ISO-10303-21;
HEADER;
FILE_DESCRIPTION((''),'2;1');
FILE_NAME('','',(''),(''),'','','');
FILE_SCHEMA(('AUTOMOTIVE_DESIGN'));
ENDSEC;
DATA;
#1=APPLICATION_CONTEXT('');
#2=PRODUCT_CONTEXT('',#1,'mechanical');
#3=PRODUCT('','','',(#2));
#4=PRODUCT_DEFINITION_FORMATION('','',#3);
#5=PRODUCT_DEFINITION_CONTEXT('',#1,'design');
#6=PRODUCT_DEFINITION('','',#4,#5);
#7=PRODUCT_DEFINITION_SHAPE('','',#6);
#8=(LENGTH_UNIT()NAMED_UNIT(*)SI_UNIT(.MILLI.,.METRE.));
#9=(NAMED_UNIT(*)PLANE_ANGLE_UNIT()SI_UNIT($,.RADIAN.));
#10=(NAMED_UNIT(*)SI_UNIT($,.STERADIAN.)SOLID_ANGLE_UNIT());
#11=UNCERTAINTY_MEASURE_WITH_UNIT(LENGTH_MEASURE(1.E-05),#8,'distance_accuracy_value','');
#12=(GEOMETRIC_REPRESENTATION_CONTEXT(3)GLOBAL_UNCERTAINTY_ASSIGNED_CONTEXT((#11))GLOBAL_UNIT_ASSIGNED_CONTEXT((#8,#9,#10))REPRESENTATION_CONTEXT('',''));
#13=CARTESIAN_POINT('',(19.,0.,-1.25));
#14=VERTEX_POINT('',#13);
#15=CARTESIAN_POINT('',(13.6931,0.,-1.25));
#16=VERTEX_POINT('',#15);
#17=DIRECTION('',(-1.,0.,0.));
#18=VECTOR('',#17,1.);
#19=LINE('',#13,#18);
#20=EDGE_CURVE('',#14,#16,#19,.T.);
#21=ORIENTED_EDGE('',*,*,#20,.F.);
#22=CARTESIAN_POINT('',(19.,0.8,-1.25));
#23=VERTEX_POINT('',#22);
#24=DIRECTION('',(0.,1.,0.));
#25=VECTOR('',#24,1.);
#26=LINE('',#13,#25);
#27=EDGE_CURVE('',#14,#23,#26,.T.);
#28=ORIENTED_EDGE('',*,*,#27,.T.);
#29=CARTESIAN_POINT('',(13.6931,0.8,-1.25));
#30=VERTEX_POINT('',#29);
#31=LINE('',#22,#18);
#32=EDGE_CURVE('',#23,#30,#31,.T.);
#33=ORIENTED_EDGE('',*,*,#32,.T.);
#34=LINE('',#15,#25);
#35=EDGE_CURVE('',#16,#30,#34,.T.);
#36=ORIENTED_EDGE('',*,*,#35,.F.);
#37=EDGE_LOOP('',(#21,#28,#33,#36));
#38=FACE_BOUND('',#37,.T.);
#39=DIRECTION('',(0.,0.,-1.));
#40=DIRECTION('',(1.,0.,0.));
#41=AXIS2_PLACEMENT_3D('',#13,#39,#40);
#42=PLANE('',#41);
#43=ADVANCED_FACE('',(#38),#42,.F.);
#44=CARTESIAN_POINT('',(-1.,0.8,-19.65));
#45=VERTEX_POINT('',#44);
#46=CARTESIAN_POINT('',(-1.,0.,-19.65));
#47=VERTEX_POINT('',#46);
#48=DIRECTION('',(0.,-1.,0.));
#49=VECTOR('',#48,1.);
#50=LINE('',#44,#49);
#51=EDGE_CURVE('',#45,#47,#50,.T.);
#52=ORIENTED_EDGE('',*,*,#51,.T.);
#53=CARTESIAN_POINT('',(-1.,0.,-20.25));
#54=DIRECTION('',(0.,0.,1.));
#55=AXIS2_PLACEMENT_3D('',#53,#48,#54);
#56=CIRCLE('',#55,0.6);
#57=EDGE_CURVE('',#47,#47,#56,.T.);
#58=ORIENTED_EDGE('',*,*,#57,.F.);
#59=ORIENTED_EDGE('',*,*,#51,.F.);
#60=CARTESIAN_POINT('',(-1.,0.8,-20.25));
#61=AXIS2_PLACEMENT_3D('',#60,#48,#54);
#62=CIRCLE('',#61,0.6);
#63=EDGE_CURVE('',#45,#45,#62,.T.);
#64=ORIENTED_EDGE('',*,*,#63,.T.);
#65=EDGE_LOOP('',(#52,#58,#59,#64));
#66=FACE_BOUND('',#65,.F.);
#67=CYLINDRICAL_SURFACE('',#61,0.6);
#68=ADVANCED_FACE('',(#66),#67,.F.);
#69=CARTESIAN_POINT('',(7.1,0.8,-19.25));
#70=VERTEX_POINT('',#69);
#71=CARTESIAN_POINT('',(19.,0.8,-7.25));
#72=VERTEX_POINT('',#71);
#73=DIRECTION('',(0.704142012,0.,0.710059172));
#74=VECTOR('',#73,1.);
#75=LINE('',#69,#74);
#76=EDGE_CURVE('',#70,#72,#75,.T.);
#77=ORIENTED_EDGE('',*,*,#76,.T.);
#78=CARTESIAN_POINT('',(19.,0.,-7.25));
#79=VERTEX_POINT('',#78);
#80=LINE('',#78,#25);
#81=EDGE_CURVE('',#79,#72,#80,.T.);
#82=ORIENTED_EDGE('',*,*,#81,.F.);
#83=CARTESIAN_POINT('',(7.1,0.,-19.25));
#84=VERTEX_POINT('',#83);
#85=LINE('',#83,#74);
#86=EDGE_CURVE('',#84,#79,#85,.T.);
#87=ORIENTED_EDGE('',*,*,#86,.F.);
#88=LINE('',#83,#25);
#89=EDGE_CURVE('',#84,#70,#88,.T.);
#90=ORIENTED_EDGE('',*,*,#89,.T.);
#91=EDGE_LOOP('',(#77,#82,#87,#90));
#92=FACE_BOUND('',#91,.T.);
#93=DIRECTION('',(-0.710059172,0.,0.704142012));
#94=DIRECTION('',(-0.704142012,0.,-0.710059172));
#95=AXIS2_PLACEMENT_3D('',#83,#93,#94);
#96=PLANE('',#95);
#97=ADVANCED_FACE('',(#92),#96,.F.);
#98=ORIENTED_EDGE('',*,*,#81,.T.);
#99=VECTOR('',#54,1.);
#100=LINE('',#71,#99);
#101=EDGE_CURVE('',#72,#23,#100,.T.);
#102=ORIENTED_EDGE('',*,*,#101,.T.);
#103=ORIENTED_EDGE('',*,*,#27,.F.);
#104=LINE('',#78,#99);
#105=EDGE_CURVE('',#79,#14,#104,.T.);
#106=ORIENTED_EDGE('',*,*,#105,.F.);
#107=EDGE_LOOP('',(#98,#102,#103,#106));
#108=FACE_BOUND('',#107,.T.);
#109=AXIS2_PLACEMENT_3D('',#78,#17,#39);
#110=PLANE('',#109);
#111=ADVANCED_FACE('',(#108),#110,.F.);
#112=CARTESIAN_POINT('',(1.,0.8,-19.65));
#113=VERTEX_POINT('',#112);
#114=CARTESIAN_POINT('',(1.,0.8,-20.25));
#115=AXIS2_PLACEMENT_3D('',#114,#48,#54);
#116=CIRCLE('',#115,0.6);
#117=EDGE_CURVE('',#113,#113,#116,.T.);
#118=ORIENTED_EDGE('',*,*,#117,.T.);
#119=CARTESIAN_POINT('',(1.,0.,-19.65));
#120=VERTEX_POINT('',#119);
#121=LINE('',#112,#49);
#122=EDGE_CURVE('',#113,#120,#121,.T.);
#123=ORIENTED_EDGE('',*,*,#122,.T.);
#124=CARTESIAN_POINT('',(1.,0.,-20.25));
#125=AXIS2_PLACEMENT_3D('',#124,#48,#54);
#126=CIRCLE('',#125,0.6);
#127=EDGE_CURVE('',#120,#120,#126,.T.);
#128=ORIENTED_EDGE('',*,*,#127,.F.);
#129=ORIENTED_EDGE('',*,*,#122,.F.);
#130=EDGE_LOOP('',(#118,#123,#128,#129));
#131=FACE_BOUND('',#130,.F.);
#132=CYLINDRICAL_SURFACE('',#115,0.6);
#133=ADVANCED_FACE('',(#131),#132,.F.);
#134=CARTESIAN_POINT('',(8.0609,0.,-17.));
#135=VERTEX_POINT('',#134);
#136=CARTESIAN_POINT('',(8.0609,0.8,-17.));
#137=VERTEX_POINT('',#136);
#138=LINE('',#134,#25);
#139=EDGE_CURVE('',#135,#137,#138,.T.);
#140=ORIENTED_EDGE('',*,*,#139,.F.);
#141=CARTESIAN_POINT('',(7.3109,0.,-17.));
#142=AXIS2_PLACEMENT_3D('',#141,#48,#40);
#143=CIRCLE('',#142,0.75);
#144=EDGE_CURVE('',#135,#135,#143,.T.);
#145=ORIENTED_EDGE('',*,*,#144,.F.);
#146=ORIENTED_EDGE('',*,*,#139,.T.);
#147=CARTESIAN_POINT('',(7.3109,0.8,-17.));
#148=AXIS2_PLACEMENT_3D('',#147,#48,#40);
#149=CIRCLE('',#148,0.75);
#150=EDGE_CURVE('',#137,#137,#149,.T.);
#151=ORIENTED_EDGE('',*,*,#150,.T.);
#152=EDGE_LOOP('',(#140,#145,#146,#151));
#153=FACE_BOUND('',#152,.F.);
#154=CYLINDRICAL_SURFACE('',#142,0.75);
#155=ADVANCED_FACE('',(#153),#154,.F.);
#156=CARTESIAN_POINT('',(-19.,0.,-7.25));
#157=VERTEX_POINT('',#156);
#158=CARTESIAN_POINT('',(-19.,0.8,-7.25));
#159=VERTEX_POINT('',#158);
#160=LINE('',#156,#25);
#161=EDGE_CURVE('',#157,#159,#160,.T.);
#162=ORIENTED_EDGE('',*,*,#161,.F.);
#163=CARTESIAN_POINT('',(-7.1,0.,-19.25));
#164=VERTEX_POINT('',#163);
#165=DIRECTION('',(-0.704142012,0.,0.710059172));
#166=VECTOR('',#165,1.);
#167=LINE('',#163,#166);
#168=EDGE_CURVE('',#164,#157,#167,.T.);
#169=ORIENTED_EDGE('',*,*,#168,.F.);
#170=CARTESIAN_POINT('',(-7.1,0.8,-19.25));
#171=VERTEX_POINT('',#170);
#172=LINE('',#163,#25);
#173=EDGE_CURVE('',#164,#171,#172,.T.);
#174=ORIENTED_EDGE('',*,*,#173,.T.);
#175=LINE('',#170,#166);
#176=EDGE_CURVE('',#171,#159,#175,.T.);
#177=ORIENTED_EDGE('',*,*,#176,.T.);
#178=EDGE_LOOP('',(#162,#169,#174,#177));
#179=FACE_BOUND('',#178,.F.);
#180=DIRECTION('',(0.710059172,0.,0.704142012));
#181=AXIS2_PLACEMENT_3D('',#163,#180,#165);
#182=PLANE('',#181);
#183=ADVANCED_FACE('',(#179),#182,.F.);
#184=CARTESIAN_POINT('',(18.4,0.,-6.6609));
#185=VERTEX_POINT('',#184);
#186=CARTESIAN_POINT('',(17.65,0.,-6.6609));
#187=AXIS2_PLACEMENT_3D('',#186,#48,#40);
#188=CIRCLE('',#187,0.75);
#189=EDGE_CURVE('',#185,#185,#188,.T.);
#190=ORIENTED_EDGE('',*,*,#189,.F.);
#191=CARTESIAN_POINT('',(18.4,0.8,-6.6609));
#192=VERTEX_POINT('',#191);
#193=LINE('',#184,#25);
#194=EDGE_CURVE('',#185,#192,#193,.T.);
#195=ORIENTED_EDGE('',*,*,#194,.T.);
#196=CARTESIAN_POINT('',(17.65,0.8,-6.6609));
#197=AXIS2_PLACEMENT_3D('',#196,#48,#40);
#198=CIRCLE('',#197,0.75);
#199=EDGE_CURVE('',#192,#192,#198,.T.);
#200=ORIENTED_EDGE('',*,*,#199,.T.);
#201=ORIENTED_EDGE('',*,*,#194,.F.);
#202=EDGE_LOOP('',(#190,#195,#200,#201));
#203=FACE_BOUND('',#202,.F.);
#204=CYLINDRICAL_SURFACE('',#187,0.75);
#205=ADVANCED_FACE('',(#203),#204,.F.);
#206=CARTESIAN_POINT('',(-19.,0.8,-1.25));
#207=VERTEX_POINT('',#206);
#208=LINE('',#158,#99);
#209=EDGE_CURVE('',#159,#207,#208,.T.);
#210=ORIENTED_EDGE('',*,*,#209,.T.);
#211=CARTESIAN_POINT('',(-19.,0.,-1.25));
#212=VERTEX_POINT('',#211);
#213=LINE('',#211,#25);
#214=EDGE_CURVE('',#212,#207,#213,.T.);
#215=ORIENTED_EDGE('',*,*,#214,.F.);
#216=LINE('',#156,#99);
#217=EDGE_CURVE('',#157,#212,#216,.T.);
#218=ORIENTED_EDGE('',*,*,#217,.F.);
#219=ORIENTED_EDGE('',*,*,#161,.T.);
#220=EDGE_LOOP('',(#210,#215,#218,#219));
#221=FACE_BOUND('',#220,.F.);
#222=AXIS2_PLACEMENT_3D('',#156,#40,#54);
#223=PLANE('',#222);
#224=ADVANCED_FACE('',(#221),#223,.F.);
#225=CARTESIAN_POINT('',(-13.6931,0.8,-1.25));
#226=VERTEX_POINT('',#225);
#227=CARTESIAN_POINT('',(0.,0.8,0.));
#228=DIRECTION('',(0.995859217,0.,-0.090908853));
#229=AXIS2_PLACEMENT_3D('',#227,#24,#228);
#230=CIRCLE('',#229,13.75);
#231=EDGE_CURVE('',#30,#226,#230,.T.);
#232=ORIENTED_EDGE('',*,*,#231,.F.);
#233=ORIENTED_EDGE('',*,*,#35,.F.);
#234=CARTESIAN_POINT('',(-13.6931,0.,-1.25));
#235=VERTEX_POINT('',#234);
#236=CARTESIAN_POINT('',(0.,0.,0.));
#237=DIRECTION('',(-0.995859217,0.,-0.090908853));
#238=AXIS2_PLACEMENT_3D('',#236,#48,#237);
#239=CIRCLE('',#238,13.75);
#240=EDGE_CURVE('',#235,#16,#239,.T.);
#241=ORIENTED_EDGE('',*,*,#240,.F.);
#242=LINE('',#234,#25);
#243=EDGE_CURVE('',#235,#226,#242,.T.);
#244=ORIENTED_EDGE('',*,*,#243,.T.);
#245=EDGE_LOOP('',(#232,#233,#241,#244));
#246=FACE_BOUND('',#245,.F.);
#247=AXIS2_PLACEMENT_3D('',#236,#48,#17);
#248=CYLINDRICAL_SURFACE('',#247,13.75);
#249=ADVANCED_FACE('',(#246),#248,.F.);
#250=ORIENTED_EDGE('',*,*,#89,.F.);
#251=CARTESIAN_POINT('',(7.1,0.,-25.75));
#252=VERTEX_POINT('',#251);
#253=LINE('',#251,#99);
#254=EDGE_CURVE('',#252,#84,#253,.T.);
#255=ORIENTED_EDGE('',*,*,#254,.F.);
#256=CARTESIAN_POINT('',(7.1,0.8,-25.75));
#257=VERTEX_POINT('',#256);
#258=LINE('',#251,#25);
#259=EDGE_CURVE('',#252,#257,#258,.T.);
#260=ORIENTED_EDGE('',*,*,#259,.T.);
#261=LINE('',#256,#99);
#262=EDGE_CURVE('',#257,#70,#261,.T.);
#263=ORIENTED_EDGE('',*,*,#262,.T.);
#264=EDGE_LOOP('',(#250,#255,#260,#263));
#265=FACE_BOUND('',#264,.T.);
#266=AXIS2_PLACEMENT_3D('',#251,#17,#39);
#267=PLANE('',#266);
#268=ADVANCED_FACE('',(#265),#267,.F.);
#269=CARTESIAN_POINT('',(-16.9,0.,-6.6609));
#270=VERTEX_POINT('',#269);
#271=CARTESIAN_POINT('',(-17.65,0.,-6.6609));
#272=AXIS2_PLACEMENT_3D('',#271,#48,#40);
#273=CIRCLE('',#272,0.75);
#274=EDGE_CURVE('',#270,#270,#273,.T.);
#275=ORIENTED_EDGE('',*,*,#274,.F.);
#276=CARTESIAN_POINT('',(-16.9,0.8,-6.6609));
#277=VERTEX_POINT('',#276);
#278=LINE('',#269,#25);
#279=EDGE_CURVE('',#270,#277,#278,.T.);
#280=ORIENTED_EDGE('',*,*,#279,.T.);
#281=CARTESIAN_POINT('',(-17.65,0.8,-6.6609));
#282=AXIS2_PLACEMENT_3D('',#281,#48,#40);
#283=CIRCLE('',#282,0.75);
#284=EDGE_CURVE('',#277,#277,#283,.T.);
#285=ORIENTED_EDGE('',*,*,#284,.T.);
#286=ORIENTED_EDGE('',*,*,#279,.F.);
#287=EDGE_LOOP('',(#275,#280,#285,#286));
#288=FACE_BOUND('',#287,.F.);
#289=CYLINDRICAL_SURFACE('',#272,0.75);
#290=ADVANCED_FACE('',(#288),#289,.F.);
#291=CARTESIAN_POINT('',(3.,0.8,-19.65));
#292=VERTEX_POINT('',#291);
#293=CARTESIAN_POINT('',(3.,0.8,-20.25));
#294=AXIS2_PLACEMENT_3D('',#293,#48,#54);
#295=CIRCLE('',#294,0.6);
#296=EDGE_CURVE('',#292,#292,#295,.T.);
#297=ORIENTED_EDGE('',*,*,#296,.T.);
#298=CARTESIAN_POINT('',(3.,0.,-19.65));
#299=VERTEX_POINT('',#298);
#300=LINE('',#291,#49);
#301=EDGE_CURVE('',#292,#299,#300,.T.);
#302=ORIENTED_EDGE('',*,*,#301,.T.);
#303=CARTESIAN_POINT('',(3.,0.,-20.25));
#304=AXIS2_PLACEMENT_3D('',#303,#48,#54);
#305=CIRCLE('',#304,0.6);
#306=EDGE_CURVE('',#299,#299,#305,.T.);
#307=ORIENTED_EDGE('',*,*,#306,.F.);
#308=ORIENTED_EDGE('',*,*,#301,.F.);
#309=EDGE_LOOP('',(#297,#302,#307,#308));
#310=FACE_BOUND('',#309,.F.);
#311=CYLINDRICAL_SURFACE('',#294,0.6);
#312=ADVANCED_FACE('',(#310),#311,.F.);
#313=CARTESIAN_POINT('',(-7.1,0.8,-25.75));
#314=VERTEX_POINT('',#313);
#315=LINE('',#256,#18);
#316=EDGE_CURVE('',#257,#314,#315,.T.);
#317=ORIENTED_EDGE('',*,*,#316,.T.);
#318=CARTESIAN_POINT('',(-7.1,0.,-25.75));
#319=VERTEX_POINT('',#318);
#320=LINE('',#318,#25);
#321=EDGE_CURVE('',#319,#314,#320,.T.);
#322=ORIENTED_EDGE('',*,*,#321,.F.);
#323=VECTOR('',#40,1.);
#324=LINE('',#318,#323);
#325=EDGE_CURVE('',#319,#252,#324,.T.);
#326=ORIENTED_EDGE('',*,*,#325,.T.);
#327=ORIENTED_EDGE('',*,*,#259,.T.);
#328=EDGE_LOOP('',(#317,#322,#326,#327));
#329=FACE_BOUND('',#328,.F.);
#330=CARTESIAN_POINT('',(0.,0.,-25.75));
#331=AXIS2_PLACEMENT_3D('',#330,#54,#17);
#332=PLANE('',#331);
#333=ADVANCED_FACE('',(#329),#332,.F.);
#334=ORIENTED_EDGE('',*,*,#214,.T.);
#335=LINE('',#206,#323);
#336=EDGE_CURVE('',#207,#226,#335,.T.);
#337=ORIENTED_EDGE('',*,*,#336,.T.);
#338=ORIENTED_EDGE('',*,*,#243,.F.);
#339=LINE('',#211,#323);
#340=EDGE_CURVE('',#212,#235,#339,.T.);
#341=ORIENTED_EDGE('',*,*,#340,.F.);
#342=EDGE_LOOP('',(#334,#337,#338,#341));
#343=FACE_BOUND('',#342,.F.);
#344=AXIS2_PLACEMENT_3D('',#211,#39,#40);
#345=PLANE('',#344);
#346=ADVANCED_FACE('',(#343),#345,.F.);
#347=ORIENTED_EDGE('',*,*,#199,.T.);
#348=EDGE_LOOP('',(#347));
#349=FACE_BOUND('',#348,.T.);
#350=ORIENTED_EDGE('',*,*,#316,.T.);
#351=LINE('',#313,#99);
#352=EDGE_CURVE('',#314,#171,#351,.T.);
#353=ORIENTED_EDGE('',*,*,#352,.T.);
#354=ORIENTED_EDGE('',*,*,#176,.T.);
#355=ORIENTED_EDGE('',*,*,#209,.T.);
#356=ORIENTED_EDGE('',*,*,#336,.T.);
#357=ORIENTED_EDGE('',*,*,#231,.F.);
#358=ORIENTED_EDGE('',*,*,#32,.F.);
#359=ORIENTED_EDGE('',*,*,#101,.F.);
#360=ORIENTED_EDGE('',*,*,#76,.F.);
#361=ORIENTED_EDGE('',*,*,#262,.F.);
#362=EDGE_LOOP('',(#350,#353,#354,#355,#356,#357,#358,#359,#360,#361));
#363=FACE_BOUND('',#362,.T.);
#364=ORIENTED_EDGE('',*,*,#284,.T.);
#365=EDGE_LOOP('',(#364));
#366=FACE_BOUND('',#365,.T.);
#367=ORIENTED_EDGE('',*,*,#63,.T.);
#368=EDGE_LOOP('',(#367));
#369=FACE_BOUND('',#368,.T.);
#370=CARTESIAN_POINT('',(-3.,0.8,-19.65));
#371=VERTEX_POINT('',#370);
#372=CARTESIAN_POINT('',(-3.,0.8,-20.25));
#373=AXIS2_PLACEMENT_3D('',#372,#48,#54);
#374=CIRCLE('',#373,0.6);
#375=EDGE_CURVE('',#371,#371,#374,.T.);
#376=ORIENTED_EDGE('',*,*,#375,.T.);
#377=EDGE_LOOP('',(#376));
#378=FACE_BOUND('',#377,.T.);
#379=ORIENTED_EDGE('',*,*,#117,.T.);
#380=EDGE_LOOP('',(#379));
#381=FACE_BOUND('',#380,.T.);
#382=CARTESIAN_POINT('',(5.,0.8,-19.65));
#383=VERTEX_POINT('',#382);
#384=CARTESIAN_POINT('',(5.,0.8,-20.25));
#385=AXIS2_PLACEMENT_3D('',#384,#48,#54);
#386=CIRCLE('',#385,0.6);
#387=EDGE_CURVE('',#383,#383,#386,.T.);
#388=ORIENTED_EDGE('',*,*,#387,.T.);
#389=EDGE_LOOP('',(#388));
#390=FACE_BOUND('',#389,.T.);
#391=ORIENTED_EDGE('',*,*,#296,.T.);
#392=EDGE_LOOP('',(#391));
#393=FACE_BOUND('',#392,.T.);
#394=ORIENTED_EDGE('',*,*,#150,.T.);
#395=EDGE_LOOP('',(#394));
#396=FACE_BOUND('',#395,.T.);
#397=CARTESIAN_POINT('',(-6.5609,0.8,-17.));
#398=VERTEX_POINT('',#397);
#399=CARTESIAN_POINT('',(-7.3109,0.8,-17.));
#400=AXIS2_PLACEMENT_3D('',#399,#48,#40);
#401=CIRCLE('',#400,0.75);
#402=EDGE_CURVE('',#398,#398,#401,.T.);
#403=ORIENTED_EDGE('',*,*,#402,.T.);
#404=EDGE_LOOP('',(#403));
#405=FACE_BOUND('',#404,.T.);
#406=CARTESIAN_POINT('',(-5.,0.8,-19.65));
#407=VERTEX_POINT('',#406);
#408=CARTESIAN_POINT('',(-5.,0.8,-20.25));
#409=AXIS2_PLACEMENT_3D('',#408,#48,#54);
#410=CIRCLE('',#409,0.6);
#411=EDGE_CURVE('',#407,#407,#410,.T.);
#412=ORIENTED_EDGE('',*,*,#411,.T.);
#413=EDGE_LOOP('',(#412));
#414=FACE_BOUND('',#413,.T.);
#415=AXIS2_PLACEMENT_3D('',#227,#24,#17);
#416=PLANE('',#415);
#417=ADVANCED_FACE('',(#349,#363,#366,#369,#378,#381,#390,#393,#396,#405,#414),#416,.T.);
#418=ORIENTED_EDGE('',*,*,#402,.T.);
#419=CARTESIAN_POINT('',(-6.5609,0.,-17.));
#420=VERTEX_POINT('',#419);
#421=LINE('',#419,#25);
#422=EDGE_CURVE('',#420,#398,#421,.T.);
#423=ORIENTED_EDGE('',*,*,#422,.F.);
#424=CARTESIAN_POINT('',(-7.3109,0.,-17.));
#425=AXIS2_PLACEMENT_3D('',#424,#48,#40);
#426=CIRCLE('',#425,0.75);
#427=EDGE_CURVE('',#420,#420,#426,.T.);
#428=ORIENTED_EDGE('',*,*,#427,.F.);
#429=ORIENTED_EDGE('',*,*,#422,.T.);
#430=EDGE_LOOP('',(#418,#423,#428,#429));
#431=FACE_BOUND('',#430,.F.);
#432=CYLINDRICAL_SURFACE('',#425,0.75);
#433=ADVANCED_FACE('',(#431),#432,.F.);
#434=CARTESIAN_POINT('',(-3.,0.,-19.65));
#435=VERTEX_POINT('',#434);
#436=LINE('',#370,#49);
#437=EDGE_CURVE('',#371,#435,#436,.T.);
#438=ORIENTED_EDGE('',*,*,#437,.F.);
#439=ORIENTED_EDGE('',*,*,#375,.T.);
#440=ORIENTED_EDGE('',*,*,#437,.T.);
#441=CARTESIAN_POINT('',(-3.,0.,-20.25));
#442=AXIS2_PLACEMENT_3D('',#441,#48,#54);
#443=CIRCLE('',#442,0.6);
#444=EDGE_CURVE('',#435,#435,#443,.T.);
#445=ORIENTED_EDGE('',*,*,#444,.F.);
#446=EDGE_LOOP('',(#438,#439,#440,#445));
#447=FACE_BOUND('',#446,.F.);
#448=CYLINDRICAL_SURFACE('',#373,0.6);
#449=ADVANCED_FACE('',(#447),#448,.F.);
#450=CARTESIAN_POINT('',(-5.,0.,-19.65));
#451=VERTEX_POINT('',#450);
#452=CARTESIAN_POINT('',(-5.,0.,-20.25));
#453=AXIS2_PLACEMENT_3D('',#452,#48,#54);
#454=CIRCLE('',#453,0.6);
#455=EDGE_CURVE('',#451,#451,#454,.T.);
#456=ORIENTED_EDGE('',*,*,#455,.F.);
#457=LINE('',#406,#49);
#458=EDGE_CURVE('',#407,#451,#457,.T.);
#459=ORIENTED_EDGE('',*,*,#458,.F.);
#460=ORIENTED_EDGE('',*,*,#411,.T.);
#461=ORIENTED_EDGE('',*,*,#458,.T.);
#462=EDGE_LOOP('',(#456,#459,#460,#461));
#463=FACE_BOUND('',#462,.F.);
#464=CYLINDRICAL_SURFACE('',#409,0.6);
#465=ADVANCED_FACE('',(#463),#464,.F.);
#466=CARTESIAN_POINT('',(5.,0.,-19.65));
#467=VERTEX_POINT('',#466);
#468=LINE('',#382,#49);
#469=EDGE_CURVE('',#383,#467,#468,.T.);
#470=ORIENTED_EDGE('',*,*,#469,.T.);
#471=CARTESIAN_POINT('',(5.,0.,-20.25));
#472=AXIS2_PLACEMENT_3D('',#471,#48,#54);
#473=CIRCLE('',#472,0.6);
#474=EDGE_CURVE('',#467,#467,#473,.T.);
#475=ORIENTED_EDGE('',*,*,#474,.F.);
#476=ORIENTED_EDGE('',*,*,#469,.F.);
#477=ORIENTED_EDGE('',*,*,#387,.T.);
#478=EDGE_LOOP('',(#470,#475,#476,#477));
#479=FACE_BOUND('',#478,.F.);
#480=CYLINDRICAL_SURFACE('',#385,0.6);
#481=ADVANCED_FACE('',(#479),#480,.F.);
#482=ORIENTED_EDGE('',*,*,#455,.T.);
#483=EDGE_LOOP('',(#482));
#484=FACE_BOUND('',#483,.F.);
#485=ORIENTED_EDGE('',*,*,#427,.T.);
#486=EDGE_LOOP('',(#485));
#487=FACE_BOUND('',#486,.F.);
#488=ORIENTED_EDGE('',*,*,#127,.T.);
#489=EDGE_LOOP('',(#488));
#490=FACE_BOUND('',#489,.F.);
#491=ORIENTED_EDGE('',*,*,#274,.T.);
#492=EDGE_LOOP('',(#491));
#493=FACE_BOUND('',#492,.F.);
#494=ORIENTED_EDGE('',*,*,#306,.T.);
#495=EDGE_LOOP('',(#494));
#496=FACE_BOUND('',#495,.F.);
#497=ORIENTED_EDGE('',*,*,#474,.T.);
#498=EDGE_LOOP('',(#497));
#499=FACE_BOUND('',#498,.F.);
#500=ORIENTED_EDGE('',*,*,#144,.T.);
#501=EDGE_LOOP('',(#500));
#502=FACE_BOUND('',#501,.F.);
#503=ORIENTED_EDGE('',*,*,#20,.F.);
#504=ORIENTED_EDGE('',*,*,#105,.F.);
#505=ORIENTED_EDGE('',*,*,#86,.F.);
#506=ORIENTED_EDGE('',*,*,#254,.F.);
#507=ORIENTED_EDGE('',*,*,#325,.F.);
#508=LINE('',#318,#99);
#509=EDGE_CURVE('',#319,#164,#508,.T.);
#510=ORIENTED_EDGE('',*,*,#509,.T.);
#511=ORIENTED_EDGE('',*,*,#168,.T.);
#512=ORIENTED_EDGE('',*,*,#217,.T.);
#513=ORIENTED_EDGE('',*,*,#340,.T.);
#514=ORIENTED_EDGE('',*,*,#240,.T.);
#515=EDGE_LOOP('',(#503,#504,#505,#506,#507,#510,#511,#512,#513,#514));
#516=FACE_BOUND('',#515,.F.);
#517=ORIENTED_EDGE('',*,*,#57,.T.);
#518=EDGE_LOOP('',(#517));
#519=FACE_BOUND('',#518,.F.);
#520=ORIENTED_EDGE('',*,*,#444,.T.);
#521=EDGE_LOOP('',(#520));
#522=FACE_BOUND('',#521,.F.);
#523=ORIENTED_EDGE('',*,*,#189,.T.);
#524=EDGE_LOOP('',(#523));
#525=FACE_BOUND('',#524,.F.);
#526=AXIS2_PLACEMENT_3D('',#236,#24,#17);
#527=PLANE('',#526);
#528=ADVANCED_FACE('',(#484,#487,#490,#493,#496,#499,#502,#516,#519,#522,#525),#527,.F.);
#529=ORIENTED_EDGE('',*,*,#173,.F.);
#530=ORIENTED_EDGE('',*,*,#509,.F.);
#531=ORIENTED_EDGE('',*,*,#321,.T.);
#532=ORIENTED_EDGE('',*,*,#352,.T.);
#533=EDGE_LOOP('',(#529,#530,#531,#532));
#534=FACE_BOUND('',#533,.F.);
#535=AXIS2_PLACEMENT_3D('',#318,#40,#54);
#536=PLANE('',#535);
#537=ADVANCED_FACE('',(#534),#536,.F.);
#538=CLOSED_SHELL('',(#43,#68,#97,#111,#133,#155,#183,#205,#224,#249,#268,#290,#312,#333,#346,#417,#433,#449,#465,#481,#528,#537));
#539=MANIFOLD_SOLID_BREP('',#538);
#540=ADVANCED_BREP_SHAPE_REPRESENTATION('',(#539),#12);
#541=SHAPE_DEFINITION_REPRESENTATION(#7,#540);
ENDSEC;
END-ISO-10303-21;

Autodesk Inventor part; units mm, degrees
ref_plane "YZ Plane" through (0, 0, 0) normal (1, 0, 0) x (0, 1, 0)
ref_plane "XZ Plane" through (0, 0, 0) normal (0, 1, 0) x (-1, 0, 0)
ref_plane "XY Plane" through (0, 0, 0) normal (0, 0, 1) x (1, 0, 0)
sketch "Sketch11" plane through (0, 0, 0) normal (0, 1, 0) x (-1, 0, 0)
  circle A0 centre (0, 0) radius 13.75
  line L0 (0, -25.75) -> (7.1, -25.75)
  line L1 (7.1, -25.75) -> (7.1, -19.25)
  line L2 (7.1, -19.25) -> (19, -7.25)
  line L3 (19, -7.25) -> (19, -1.25)
  line L4 (19, -1.25) -> (13.6931, -1.25)
  line L5 (0, -25.75) -> (0, -13.75)
  dimension "d82" = 38
  dimension "d83" = 27.5
  dimension "d84" = 14.2
  dimension "d85" = 6
  dimension "d86" = 12
  dimension "d87" = 6.5
  dimension "d88" = 24.5
extrude "Extrusion7" add sketch "Sketch11" along normal blind 0.8 contours A0 L4 L3 L2 L1 L0 L5
mirror "Mirror5" about plane through (0, 0, -13.75) normal (1, 0, 0) of "Extrusion7"
sketch "Sketch12" plane through (0, 0.8, 0) normal (0, 1, 0) x (1, 0, 0)
  line L0 (-7.1, 25.75) -> (7.1, 25.75) projected
  line L1 (0, 0) -> (0, 27.3302) construction
  point P0 (-1, 20.25)
  dimension "d91" = 5.5
  dimension "d92" = 1
hole "Hole5" at (-1, 0.8, -20.25) direction (0, -1, 0) diameter 1.2 end through all
pattern_linear "Rectangular Pattern1" count 6 spacing 2 along (1, 0, 0) of "Hole5" first direction both ways yes
sketch "Sketch13" plane through (0, 0, 0) normal (0, -1, 0) x (1, 0, 0)
  circle A0 centre (-17.65, -6.6609) radius 0.75 projected
  circle A1 centre (-7.3109, -17) radius 0.75 projected
  circle A2 centre (7.3109, -17) radius 0.75 projected
  circle A3 centre (17.65, -6.6609) radius 0.75 projected
  point P0 (0, 0)
extrude "Extrusion8" cut sketch "Sketch13" against normal through all
properties part number "Nema 17 PCB" material "MDF Medium Density Fiberboard"
